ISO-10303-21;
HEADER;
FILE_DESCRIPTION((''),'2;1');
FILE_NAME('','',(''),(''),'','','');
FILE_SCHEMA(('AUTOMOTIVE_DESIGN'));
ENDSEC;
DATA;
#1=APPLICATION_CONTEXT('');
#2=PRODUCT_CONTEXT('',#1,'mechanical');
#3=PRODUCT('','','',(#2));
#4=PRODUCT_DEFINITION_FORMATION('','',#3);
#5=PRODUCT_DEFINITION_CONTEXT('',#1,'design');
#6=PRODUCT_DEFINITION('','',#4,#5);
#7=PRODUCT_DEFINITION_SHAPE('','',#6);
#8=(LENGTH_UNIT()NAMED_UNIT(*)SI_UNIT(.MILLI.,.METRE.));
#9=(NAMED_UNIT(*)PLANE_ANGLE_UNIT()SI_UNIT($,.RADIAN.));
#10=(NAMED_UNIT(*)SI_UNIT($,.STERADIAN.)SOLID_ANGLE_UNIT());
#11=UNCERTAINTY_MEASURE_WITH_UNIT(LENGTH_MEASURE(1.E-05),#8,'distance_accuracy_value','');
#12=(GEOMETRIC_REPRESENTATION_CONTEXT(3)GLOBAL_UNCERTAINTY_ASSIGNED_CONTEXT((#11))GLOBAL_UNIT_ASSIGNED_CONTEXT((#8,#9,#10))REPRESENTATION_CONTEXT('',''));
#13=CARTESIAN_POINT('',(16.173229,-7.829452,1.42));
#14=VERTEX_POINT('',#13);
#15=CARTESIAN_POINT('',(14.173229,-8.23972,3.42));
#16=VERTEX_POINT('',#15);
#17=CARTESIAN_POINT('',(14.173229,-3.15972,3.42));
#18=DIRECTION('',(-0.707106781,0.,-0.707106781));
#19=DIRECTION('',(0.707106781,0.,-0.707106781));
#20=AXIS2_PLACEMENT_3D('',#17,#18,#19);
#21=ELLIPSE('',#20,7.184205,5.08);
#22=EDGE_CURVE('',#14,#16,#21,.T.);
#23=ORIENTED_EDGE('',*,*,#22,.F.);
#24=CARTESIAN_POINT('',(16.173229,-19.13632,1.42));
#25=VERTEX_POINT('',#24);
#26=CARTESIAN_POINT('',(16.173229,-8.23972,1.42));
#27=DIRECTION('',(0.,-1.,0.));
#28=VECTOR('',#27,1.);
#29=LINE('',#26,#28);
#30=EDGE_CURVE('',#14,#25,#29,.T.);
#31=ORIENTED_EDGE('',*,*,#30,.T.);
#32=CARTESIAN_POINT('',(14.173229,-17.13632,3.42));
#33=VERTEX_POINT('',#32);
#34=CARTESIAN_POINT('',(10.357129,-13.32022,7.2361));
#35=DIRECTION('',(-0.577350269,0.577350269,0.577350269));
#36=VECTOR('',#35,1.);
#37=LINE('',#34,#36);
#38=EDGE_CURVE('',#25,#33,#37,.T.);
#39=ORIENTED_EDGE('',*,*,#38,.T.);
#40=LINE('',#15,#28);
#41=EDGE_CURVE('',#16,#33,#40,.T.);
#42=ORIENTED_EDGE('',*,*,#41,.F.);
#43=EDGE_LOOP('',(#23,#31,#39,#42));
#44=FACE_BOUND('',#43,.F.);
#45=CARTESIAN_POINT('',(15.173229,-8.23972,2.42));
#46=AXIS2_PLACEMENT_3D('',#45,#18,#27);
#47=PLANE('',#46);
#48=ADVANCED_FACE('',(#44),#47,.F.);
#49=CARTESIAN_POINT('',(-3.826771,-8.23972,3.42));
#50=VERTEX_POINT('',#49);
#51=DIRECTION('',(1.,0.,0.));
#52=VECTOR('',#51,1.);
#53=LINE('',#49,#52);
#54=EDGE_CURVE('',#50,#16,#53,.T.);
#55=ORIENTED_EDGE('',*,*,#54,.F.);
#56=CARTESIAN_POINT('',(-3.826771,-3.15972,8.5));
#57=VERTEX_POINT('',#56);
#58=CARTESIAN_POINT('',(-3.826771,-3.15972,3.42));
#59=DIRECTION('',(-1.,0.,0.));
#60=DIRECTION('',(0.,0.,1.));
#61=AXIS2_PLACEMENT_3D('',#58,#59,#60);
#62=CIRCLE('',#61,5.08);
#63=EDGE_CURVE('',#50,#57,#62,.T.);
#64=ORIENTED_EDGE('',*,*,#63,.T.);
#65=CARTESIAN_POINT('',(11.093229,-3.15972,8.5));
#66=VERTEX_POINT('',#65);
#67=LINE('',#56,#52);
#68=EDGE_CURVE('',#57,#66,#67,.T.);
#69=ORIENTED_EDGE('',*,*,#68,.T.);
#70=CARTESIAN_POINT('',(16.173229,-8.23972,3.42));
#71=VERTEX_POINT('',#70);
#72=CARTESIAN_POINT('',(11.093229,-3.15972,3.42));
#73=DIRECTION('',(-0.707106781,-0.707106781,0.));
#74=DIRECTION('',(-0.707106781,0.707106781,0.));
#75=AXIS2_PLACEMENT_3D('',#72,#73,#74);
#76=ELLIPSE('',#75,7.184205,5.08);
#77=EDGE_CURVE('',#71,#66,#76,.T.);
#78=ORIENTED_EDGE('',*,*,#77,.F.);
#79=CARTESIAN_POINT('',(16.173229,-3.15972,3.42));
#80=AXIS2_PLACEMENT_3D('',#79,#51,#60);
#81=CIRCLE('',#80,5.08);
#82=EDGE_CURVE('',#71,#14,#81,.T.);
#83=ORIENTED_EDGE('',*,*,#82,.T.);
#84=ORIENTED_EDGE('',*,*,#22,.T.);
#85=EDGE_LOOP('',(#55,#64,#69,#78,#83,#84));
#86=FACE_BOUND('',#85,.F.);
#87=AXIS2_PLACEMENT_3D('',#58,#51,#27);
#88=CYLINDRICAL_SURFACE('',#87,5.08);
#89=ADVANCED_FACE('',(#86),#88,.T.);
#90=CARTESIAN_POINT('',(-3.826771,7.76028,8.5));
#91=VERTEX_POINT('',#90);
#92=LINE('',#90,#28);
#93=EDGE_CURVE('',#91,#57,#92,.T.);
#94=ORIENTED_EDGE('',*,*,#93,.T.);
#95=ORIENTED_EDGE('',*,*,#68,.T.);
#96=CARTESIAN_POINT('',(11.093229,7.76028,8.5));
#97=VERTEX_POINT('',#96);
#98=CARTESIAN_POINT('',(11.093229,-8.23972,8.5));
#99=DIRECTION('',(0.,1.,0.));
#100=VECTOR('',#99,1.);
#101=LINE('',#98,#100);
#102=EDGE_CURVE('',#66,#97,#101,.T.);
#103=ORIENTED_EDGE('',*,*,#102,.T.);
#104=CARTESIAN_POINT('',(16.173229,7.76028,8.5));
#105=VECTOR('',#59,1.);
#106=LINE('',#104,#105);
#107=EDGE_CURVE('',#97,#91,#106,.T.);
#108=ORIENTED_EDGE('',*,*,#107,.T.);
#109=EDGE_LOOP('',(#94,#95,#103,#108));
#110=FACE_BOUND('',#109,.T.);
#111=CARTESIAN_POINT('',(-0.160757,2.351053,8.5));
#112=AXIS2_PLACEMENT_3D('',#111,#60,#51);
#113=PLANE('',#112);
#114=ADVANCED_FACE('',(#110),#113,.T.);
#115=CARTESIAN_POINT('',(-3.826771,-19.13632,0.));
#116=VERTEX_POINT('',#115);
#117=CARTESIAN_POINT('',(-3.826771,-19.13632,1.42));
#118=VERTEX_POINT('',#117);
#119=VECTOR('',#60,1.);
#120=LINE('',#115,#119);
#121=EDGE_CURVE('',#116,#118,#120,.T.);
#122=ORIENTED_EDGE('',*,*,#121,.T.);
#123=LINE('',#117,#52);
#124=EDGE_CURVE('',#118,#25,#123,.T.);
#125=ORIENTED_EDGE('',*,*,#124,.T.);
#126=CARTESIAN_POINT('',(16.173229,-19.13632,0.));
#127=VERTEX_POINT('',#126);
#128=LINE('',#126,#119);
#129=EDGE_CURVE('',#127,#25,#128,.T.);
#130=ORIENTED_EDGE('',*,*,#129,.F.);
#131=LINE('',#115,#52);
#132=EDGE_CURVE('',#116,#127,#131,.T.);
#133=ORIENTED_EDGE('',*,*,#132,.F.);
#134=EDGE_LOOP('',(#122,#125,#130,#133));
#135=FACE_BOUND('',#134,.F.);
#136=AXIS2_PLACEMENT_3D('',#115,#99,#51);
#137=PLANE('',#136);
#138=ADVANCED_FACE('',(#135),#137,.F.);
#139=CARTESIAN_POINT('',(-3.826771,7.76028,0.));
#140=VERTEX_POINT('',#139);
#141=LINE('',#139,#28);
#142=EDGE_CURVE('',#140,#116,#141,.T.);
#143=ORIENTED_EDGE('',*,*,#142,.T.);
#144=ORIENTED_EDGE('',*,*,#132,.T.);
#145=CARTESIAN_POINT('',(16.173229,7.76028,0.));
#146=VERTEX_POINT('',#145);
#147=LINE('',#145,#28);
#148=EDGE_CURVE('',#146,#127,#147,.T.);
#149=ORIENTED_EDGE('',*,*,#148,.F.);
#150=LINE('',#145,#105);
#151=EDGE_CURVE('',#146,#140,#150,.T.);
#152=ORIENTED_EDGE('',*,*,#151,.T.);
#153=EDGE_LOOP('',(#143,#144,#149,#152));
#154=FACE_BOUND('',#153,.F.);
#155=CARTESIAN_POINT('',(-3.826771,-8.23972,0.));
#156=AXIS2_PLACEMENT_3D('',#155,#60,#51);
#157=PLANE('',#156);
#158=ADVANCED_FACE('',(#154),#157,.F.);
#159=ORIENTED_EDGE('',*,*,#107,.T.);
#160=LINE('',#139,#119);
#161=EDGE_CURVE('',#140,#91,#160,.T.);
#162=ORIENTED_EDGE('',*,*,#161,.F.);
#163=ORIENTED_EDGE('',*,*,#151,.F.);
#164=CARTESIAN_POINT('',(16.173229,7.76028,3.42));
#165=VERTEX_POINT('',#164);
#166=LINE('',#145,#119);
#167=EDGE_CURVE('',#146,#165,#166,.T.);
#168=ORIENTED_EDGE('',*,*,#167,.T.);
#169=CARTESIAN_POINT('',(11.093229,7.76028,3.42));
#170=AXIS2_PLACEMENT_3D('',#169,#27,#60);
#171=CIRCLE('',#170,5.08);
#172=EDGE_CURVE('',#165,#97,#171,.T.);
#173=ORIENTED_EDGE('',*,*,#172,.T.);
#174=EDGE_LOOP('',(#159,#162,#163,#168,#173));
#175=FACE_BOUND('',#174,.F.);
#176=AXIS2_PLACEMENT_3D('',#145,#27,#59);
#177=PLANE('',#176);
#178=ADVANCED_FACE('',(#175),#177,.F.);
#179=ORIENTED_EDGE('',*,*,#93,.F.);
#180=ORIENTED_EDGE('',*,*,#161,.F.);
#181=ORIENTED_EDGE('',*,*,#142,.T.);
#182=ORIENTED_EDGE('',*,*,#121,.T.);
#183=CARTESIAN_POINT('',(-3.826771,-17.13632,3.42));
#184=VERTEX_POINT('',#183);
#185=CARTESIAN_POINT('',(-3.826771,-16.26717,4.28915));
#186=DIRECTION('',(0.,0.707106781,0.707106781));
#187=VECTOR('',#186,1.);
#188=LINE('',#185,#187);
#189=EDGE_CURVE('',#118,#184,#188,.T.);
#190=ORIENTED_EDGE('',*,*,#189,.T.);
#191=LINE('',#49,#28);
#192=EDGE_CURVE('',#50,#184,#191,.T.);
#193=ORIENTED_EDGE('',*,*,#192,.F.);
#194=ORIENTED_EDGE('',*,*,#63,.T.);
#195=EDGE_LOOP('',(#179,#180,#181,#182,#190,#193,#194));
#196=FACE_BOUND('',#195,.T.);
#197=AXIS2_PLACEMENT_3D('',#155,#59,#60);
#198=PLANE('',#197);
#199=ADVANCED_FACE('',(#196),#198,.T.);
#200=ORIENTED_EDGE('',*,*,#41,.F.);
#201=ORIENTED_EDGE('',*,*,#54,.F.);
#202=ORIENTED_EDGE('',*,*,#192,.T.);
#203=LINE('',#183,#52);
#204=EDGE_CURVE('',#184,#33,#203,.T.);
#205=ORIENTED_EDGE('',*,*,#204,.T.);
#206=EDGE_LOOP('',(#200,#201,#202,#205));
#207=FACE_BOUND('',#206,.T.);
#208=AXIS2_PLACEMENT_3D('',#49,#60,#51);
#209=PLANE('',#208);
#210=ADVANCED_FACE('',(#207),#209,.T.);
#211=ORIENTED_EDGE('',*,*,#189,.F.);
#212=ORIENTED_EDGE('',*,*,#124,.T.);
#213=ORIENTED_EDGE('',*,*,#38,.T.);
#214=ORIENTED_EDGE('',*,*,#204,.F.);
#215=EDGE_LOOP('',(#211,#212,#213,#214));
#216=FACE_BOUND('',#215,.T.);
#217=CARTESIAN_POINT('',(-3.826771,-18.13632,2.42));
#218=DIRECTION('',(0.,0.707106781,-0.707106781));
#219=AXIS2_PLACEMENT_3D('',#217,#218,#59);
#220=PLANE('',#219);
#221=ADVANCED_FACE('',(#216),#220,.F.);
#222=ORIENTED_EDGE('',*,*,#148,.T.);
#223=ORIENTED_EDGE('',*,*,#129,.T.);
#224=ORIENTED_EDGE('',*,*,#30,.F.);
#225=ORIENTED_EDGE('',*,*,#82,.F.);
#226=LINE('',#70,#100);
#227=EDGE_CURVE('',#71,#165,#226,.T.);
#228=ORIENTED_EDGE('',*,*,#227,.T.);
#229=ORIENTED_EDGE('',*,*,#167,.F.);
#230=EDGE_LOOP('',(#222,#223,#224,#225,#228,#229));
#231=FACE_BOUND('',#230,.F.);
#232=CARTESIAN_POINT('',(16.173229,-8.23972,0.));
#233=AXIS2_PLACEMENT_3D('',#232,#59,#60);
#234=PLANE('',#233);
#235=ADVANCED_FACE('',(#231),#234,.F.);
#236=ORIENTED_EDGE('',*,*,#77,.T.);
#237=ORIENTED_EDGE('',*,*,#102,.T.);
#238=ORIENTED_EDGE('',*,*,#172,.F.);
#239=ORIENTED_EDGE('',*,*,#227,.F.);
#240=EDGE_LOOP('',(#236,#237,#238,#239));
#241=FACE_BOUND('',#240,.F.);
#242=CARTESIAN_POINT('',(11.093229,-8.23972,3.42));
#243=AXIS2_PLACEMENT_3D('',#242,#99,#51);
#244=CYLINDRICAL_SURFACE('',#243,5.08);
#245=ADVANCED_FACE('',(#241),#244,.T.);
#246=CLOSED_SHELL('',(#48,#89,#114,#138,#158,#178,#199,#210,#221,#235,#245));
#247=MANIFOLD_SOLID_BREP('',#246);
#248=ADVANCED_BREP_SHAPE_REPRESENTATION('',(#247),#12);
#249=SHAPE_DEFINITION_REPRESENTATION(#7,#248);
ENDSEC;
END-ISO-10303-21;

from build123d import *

# Parameters (mm, degrees)
F1_DEPTH = 8.5
F2_R     = 5.08
F3_DEPTH = 10.8966
F4_SIZE  = 2


# Not quite as in the source:
# - a feature of the source that left no trace in its solid (it failed there, or was rolled back) is left out


with BuildPart() as f1:
    # F0 (on Top) → F1 (new body)
    with BuildSketch(Plane.XY):
        with BuildLine():
            Line((8.9732294485, 7.7602798555), (-3.8267705515, 7.7602798555))
            Line((-3.8267705515, 7.7602798555), (-3.8267705515, -8.2397201445))
            ThreePointArc((-3.8267705515, -8.2397201445), (-0.2330190264, 2.0052786354), (8.9732294485, 7.7602798555))
        make_face()
        with BuildLine():
            Line((16.1732294485, 7.7602798555), (8.9732294485, 7.7602798555))
            ThreePointArc((8.9732294485, 7.7602798555), (-0.2330190264, 2.0052786354), (-3.8267705515, -8.2397201445))
            Line((-3.8267705515, -8.2397201445), (16.1732294485, -8.2397201445))
            Line((16.1732294485, -8.2397201445), (16.1732294485, 7.7602798555))
        make_face()
    extrude(amount=F1_DEPTH)

    # F2
    f2_edges = [f1.edges().sort_by_distance(p)[0] for p in [
        (16.173229, -0.23972, 8.5),
        (6.173229, -8.23972, 8.5),
    ]]
    fillet(f2_edges, radius=F2_R)

    # F3 (add): a face of the model
    f3_faces = [f1.faces().sort_by_distance(p)[0] for p in [
        (6.1732294485, -8.2397201445, 1.71),
    ]]
    extrude(f3_faces, amount=F3_DEPTH)

    # F4
    f4_edges = [f1.edges().sort_by_distance(p)[0] for p in [
        (16.173229, -13.68802, 3.42),
        (6.173229, -19.13632, 3.42),
    ]]
    chamfer(f4_edges, length=F4_SIZE)


solid = f1.part
